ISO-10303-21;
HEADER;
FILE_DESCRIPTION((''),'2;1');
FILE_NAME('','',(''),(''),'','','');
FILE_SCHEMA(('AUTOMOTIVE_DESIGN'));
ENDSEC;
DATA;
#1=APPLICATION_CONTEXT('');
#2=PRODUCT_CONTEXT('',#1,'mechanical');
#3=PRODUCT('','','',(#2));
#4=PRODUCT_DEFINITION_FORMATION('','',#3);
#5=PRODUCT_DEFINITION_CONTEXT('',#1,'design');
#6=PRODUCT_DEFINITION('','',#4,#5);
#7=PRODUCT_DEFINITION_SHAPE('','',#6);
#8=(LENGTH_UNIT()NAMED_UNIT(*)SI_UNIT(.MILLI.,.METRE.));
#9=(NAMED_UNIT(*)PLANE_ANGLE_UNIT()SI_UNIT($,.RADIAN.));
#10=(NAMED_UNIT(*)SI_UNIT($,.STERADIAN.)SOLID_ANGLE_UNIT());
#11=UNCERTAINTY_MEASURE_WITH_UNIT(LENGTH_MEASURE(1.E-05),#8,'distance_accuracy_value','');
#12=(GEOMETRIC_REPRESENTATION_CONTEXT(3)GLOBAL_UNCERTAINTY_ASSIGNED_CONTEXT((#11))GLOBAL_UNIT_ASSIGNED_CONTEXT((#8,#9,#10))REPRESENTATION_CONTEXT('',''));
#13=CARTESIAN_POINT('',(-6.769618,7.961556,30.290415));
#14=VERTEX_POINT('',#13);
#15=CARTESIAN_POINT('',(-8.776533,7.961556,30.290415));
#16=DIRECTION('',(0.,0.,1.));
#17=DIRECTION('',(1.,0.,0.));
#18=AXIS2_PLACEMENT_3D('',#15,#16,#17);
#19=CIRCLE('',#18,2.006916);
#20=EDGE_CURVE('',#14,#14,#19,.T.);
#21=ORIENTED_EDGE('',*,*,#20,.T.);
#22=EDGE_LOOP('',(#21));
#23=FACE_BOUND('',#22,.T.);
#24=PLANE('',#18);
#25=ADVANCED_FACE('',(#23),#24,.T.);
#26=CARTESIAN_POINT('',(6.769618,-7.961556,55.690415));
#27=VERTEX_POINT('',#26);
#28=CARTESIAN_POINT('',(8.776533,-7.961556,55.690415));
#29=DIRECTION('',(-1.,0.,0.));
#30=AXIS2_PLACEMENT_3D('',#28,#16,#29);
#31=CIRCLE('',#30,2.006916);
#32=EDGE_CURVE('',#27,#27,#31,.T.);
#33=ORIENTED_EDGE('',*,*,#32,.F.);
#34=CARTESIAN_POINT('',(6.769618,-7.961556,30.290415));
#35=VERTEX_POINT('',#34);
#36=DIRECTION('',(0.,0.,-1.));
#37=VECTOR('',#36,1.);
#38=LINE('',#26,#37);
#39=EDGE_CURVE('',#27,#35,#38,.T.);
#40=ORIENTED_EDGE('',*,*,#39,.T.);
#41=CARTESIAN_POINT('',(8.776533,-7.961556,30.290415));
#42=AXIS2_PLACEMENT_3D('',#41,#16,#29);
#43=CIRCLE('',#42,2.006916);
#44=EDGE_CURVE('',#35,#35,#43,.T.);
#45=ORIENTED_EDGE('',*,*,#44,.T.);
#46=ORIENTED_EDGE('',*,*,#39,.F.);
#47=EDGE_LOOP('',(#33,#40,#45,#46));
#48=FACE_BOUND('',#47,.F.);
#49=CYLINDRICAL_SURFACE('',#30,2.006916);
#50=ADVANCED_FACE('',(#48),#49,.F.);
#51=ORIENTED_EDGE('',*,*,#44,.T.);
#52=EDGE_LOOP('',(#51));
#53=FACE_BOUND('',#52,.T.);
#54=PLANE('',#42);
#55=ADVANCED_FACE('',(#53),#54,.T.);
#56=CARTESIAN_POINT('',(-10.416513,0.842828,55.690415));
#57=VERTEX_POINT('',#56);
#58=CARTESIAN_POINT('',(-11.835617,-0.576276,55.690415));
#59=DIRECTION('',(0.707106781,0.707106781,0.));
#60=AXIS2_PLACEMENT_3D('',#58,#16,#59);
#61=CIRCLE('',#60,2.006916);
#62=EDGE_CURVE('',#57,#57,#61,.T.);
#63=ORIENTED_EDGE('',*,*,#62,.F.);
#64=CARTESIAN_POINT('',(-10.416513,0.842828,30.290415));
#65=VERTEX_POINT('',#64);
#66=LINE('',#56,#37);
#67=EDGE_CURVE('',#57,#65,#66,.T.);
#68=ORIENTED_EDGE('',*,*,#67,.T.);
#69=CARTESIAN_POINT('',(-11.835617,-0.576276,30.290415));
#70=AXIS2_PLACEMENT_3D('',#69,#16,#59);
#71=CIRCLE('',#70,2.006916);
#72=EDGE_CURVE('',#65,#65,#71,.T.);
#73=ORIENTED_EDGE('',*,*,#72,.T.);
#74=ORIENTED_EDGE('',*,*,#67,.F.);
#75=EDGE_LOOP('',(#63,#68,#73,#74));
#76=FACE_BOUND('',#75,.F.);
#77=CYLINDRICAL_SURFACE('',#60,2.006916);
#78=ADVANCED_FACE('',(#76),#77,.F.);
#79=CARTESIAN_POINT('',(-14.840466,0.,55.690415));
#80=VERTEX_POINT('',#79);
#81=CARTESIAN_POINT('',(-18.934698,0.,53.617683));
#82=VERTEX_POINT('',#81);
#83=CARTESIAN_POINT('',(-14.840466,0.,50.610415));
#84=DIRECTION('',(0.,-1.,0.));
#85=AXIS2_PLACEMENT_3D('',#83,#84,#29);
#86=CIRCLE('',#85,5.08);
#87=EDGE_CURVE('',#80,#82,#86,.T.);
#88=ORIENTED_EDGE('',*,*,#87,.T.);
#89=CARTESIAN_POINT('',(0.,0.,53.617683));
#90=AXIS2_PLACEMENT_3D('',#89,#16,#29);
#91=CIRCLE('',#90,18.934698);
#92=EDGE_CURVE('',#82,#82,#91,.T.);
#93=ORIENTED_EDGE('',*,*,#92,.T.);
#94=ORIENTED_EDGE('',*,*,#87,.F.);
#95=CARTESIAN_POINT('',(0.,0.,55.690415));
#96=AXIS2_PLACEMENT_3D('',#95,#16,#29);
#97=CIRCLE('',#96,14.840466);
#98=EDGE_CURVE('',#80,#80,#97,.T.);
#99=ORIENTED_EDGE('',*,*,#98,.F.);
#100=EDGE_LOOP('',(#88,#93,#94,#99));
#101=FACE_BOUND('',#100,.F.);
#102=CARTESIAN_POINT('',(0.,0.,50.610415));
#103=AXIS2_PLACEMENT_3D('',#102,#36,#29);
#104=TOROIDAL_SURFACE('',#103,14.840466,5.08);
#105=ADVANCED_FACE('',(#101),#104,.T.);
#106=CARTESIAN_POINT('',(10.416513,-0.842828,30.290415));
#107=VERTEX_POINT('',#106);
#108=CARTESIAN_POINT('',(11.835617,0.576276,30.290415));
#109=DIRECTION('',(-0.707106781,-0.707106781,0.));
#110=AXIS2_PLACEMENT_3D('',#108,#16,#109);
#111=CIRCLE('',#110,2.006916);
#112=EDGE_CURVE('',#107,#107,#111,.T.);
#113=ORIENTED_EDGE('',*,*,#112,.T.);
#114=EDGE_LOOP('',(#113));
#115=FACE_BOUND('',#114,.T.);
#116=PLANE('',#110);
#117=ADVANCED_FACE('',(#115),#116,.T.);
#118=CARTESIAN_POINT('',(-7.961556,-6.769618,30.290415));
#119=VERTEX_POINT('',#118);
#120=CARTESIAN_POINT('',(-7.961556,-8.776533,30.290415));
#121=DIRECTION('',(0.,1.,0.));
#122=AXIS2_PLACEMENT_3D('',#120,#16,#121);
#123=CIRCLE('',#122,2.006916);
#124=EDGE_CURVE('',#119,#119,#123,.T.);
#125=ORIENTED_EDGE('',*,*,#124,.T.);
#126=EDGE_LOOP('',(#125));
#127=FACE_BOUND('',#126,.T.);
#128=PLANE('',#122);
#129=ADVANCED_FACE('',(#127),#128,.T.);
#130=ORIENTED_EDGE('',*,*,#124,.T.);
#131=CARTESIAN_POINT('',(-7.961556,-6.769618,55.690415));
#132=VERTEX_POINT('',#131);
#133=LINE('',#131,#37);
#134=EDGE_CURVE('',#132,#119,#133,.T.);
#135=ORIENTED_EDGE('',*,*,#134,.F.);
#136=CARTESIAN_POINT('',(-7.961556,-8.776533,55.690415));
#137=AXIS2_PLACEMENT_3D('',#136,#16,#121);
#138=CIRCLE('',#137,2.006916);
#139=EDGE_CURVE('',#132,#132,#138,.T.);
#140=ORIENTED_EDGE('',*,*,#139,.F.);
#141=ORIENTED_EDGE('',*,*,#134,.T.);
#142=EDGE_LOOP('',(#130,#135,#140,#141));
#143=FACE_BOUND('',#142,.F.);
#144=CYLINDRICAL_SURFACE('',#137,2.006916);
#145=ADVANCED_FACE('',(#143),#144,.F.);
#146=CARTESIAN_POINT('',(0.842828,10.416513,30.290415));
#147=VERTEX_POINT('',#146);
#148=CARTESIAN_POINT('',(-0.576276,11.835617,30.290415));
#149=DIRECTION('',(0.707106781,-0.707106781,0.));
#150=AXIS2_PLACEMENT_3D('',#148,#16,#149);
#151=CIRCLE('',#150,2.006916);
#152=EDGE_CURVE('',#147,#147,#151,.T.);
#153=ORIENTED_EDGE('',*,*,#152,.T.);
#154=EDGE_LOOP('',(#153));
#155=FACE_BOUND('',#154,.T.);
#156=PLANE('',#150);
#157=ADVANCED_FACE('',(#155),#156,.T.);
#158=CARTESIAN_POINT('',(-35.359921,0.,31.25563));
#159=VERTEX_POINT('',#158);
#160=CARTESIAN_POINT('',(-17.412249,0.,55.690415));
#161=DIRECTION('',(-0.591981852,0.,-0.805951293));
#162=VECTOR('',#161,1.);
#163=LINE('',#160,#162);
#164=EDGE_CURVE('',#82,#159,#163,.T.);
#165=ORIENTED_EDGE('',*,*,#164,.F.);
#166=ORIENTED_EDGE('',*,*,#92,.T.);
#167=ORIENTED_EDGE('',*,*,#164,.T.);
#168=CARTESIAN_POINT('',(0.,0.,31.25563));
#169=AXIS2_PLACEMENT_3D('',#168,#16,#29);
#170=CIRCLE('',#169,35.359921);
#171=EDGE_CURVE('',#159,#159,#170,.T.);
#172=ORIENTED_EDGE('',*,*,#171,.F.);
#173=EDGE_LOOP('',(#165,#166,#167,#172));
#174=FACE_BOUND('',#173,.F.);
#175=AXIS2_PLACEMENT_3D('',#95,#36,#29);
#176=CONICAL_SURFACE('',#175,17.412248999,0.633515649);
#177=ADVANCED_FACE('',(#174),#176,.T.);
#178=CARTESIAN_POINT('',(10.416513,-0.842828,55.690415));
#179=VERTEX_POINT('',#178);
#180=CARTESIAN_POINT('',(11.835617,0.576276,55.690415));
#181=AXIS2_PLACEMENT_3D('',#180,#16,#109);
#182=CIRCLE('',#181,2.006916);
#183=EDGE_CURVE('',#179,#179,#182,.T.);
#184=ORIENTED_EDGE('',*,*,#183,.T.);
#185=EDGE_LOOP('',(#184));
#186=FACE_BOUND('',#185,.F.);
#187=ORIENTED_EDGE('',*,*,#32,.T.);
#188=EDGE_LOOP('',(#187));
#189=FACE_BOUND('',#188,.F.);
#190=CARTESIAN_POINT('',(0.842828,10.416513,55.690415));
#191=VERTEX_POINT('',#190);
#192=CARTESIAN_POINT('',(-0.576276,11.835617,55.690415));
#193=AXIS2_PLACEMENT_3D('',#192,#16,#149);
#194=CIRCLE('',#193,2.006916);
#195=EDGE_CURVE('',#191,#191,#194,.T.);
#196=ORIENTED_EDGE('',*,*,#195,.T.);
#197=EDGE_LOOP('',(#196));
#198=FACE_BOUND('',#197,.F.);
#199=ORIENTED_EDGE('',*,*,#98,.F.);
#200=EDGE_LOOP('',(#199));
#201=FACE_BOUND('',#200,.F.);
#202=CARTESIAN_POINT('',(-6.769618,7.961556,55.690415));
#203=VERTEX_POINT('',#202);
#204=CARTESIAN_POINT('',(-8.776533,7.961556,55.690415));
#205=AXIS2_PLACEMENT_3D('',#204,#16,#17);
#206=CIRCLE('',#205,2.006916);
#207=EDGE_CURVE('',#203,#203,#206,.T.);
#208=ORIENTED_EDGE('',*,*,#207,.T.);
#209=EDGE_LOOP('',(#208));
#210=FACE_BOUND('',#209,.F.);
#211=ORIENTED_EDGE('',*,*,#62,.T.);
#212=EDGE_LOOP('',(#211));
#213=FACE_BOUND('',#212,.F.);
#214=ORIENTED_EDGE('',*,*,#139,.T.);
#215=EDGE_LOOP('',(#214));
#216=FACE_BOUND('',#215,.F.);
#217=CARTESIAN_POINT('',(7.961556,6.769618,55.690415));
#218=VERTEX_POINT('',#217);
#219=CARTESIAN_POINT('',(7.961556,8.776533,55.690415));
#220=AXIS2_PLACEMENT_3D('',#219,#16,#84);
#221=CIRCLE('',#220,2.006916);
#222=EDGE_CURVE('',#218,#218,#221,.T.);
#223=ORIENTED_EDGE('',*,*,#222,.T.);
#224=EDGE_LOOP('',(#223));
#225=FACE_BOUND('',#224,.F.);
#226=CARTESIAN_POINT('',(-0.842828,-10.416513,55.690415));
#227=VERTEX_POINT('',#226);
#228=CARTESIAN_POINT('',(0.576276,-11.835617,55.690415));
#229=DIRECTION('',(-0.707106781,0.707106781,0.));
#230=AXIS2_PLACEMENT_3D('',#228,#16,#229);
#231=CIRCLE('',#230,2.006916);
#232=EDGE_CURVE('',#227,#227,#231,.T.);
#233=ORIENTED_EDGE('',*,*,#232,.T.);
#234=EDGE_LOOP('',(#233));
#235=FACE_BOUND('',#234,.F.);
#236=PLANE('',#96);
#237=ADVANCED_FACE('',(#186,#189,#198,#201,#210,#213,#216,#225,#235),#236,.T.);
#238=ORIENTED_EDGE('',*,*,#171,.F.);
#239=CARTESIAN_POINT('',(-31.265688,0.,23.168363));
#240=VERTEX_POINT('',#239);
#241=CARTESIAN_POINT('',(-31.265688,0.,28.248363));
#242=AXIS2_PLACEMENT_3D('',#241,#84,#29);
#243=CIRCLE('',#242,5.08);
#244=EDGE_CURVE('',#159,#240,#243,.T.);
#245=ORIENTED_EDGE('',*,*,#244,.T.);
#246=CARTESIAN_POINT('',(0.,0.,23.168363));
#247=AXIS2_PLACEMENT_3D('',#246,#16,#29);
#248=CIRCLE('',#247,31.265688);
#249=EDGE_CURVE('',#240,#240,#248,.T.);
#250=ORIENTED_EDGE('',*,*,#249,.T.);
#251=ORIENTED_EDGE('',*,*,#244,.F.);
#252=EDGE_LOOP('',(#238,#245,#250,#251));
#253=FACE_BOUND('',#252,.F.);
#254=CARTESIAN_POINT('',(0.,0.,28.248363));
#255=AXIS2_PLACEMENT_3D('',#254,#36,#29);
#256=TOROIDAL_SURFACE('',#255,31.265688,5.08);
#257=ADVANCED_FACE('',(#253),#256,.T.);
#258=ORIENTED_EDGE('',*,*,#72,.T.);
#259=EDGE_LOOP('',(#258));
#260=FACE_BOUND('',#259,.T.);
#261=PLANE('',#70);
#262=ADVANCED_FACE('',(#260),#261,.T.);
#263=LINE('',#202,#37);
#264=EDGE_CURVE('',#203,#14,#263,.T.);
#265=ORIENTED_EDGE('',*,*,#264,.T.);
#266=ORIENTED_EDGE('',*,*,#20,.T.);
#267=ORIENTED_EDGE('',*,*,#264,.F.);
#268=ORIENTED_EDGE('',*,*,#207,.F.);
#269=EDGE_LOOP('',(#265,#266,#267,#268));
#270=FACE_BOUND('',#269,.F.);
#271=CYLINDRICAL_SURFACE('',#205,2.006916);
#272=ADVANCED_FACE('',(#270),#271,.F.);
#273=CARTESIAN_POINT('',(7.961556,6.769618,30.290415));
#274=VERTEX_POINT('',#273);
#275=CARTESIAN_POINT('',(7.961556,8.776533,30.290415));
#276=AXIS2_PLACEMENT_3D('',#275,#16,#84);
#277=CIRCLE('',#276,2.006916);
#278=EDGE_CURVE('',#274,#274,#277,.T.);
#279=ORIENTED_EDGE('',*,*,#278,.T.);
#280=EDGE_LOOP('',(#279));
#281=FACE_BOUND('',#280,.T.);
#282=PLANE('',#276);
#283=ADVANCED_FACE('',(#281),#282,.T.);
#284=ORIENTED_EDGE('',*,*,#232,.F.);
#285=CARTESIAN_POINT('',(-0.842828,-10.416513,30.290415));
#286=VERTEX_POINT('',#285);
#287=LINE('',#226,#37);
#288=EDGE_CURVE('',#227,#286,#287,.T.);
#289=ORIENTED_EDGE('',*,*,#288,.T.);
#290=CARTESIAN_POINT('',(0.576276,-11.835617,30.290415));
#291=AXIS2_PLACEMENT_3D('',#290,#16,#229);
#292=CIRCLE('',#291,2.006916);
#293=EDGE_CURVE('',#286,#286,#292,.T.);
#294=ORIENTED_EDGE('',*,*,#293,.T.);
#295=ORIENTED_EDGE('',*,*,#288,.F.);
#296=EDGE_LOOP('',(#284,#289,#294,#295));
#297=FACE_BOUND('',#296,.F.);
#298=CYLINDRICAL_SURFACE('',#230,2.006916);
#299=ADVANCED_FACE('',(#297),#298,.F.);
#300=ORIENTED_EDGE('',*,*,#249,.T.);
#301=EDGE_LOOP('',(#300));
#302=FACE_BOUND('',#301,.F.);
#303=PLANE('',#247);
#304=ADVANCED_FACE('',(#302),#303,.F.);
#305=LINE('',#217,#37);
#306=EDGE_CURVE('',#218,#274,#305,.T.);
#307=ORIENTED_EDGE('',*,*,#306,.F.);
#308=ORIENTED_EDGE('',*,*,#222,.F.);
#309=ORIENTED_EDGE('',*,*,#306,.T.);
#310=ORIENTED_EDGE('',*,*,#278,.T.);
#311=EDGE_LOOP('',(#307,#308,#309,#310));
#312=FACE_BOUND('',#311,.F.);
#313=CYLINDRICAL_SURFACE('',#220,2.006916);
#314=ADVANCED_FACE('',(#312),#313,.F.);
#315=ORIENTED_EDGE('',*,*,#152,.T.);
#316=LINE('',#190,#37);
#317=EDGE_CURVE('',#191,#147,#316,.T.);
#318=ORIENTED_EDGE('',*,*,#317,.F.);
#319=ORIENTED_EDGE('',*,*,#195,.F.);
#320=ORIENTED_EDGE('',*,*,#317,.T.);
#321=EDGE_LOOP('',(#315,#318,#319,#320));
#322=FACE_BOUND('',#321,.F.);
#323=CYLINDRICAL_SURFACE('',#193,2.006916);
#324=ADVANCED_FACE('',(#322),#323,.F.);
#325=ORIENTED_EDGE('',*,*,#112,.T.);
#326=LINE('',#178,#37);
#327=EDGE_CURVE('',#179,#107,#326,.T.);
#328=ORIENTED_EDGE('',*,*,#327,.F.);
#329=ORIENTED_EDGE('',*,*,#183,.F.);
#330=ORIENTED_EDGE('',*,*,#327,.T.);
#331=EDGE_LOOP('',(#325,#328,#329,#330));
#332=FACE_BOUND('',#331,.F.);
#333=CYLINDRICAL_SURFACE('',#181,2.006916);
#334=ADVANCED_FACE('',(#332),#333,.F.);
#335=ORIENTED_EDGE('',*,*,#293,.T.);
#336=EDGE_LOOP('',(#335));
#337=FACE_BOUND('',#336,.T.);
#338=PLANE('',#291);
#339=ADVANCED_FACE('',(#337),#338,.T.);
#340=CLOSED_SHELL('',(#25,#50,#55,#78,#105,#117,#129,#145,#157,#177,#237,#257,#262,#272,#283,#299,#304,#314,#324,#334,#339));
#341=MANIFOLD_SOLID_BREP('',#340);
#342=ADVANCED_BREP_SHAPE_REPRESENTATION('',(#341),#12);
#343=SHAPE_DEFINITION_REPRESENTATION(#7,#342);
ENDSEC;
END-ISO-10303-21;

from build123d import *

# Parameters (mm, degrees)
F2_R            = 5.08
F3_R            = 2.006915686
F4_DEPTH        = 25.4
F4_COPIES_COUNT = 8


# Not quite as in the source:
# - a pattern or mirror of a feature is missing from the dataset's text; its kind, count and spacing are read off the source's solid


with BuildPart() as f1:
    # F0 (on Front) → F1 (revolve)
    with BuildSketch(Plane.XZ):
        Polygon((0, 23.1683626771), (0, 55.6904152036), (-17.4122489989, 55.6904152036), (-41.3001254201, 23.1683626771), align=None)
    revolve(axis=Axis((0, 0, 39.4293889403), (0, 0, 1)))

    # F2
    f2_edges = [f1.edges().sort_by_distance(p)[0] for p in [
        (41.300125, 0, 23.168363),
        (17.412249, 0, 55.690415),
    ]]
    fillet(f2_edges, radius=F2_R)

    # F3 (on face) → F4 (cut)
    with BuildSketch(Plane.XY.offset(55.6904152036)):
        with Locations((-8.7765334174, 7.9615563154)):
            Circle(F3_R)
    f4 = extrude(amount=-F4_DEPTH, mode=Mode.SUBTRACT)

    # F4_copies: F4 ×8 about axis
    f4_copies_axis = Axis((0, 0, 0), (0, 0, 1))
    for i in range(1, F4_COPIES_COUNT):
        add(f4.rotate(f4_copies_axis, i * 360 / F4_COPIES_COUNT), mode=Mode.SUBTRACT)


solid = f1.part
